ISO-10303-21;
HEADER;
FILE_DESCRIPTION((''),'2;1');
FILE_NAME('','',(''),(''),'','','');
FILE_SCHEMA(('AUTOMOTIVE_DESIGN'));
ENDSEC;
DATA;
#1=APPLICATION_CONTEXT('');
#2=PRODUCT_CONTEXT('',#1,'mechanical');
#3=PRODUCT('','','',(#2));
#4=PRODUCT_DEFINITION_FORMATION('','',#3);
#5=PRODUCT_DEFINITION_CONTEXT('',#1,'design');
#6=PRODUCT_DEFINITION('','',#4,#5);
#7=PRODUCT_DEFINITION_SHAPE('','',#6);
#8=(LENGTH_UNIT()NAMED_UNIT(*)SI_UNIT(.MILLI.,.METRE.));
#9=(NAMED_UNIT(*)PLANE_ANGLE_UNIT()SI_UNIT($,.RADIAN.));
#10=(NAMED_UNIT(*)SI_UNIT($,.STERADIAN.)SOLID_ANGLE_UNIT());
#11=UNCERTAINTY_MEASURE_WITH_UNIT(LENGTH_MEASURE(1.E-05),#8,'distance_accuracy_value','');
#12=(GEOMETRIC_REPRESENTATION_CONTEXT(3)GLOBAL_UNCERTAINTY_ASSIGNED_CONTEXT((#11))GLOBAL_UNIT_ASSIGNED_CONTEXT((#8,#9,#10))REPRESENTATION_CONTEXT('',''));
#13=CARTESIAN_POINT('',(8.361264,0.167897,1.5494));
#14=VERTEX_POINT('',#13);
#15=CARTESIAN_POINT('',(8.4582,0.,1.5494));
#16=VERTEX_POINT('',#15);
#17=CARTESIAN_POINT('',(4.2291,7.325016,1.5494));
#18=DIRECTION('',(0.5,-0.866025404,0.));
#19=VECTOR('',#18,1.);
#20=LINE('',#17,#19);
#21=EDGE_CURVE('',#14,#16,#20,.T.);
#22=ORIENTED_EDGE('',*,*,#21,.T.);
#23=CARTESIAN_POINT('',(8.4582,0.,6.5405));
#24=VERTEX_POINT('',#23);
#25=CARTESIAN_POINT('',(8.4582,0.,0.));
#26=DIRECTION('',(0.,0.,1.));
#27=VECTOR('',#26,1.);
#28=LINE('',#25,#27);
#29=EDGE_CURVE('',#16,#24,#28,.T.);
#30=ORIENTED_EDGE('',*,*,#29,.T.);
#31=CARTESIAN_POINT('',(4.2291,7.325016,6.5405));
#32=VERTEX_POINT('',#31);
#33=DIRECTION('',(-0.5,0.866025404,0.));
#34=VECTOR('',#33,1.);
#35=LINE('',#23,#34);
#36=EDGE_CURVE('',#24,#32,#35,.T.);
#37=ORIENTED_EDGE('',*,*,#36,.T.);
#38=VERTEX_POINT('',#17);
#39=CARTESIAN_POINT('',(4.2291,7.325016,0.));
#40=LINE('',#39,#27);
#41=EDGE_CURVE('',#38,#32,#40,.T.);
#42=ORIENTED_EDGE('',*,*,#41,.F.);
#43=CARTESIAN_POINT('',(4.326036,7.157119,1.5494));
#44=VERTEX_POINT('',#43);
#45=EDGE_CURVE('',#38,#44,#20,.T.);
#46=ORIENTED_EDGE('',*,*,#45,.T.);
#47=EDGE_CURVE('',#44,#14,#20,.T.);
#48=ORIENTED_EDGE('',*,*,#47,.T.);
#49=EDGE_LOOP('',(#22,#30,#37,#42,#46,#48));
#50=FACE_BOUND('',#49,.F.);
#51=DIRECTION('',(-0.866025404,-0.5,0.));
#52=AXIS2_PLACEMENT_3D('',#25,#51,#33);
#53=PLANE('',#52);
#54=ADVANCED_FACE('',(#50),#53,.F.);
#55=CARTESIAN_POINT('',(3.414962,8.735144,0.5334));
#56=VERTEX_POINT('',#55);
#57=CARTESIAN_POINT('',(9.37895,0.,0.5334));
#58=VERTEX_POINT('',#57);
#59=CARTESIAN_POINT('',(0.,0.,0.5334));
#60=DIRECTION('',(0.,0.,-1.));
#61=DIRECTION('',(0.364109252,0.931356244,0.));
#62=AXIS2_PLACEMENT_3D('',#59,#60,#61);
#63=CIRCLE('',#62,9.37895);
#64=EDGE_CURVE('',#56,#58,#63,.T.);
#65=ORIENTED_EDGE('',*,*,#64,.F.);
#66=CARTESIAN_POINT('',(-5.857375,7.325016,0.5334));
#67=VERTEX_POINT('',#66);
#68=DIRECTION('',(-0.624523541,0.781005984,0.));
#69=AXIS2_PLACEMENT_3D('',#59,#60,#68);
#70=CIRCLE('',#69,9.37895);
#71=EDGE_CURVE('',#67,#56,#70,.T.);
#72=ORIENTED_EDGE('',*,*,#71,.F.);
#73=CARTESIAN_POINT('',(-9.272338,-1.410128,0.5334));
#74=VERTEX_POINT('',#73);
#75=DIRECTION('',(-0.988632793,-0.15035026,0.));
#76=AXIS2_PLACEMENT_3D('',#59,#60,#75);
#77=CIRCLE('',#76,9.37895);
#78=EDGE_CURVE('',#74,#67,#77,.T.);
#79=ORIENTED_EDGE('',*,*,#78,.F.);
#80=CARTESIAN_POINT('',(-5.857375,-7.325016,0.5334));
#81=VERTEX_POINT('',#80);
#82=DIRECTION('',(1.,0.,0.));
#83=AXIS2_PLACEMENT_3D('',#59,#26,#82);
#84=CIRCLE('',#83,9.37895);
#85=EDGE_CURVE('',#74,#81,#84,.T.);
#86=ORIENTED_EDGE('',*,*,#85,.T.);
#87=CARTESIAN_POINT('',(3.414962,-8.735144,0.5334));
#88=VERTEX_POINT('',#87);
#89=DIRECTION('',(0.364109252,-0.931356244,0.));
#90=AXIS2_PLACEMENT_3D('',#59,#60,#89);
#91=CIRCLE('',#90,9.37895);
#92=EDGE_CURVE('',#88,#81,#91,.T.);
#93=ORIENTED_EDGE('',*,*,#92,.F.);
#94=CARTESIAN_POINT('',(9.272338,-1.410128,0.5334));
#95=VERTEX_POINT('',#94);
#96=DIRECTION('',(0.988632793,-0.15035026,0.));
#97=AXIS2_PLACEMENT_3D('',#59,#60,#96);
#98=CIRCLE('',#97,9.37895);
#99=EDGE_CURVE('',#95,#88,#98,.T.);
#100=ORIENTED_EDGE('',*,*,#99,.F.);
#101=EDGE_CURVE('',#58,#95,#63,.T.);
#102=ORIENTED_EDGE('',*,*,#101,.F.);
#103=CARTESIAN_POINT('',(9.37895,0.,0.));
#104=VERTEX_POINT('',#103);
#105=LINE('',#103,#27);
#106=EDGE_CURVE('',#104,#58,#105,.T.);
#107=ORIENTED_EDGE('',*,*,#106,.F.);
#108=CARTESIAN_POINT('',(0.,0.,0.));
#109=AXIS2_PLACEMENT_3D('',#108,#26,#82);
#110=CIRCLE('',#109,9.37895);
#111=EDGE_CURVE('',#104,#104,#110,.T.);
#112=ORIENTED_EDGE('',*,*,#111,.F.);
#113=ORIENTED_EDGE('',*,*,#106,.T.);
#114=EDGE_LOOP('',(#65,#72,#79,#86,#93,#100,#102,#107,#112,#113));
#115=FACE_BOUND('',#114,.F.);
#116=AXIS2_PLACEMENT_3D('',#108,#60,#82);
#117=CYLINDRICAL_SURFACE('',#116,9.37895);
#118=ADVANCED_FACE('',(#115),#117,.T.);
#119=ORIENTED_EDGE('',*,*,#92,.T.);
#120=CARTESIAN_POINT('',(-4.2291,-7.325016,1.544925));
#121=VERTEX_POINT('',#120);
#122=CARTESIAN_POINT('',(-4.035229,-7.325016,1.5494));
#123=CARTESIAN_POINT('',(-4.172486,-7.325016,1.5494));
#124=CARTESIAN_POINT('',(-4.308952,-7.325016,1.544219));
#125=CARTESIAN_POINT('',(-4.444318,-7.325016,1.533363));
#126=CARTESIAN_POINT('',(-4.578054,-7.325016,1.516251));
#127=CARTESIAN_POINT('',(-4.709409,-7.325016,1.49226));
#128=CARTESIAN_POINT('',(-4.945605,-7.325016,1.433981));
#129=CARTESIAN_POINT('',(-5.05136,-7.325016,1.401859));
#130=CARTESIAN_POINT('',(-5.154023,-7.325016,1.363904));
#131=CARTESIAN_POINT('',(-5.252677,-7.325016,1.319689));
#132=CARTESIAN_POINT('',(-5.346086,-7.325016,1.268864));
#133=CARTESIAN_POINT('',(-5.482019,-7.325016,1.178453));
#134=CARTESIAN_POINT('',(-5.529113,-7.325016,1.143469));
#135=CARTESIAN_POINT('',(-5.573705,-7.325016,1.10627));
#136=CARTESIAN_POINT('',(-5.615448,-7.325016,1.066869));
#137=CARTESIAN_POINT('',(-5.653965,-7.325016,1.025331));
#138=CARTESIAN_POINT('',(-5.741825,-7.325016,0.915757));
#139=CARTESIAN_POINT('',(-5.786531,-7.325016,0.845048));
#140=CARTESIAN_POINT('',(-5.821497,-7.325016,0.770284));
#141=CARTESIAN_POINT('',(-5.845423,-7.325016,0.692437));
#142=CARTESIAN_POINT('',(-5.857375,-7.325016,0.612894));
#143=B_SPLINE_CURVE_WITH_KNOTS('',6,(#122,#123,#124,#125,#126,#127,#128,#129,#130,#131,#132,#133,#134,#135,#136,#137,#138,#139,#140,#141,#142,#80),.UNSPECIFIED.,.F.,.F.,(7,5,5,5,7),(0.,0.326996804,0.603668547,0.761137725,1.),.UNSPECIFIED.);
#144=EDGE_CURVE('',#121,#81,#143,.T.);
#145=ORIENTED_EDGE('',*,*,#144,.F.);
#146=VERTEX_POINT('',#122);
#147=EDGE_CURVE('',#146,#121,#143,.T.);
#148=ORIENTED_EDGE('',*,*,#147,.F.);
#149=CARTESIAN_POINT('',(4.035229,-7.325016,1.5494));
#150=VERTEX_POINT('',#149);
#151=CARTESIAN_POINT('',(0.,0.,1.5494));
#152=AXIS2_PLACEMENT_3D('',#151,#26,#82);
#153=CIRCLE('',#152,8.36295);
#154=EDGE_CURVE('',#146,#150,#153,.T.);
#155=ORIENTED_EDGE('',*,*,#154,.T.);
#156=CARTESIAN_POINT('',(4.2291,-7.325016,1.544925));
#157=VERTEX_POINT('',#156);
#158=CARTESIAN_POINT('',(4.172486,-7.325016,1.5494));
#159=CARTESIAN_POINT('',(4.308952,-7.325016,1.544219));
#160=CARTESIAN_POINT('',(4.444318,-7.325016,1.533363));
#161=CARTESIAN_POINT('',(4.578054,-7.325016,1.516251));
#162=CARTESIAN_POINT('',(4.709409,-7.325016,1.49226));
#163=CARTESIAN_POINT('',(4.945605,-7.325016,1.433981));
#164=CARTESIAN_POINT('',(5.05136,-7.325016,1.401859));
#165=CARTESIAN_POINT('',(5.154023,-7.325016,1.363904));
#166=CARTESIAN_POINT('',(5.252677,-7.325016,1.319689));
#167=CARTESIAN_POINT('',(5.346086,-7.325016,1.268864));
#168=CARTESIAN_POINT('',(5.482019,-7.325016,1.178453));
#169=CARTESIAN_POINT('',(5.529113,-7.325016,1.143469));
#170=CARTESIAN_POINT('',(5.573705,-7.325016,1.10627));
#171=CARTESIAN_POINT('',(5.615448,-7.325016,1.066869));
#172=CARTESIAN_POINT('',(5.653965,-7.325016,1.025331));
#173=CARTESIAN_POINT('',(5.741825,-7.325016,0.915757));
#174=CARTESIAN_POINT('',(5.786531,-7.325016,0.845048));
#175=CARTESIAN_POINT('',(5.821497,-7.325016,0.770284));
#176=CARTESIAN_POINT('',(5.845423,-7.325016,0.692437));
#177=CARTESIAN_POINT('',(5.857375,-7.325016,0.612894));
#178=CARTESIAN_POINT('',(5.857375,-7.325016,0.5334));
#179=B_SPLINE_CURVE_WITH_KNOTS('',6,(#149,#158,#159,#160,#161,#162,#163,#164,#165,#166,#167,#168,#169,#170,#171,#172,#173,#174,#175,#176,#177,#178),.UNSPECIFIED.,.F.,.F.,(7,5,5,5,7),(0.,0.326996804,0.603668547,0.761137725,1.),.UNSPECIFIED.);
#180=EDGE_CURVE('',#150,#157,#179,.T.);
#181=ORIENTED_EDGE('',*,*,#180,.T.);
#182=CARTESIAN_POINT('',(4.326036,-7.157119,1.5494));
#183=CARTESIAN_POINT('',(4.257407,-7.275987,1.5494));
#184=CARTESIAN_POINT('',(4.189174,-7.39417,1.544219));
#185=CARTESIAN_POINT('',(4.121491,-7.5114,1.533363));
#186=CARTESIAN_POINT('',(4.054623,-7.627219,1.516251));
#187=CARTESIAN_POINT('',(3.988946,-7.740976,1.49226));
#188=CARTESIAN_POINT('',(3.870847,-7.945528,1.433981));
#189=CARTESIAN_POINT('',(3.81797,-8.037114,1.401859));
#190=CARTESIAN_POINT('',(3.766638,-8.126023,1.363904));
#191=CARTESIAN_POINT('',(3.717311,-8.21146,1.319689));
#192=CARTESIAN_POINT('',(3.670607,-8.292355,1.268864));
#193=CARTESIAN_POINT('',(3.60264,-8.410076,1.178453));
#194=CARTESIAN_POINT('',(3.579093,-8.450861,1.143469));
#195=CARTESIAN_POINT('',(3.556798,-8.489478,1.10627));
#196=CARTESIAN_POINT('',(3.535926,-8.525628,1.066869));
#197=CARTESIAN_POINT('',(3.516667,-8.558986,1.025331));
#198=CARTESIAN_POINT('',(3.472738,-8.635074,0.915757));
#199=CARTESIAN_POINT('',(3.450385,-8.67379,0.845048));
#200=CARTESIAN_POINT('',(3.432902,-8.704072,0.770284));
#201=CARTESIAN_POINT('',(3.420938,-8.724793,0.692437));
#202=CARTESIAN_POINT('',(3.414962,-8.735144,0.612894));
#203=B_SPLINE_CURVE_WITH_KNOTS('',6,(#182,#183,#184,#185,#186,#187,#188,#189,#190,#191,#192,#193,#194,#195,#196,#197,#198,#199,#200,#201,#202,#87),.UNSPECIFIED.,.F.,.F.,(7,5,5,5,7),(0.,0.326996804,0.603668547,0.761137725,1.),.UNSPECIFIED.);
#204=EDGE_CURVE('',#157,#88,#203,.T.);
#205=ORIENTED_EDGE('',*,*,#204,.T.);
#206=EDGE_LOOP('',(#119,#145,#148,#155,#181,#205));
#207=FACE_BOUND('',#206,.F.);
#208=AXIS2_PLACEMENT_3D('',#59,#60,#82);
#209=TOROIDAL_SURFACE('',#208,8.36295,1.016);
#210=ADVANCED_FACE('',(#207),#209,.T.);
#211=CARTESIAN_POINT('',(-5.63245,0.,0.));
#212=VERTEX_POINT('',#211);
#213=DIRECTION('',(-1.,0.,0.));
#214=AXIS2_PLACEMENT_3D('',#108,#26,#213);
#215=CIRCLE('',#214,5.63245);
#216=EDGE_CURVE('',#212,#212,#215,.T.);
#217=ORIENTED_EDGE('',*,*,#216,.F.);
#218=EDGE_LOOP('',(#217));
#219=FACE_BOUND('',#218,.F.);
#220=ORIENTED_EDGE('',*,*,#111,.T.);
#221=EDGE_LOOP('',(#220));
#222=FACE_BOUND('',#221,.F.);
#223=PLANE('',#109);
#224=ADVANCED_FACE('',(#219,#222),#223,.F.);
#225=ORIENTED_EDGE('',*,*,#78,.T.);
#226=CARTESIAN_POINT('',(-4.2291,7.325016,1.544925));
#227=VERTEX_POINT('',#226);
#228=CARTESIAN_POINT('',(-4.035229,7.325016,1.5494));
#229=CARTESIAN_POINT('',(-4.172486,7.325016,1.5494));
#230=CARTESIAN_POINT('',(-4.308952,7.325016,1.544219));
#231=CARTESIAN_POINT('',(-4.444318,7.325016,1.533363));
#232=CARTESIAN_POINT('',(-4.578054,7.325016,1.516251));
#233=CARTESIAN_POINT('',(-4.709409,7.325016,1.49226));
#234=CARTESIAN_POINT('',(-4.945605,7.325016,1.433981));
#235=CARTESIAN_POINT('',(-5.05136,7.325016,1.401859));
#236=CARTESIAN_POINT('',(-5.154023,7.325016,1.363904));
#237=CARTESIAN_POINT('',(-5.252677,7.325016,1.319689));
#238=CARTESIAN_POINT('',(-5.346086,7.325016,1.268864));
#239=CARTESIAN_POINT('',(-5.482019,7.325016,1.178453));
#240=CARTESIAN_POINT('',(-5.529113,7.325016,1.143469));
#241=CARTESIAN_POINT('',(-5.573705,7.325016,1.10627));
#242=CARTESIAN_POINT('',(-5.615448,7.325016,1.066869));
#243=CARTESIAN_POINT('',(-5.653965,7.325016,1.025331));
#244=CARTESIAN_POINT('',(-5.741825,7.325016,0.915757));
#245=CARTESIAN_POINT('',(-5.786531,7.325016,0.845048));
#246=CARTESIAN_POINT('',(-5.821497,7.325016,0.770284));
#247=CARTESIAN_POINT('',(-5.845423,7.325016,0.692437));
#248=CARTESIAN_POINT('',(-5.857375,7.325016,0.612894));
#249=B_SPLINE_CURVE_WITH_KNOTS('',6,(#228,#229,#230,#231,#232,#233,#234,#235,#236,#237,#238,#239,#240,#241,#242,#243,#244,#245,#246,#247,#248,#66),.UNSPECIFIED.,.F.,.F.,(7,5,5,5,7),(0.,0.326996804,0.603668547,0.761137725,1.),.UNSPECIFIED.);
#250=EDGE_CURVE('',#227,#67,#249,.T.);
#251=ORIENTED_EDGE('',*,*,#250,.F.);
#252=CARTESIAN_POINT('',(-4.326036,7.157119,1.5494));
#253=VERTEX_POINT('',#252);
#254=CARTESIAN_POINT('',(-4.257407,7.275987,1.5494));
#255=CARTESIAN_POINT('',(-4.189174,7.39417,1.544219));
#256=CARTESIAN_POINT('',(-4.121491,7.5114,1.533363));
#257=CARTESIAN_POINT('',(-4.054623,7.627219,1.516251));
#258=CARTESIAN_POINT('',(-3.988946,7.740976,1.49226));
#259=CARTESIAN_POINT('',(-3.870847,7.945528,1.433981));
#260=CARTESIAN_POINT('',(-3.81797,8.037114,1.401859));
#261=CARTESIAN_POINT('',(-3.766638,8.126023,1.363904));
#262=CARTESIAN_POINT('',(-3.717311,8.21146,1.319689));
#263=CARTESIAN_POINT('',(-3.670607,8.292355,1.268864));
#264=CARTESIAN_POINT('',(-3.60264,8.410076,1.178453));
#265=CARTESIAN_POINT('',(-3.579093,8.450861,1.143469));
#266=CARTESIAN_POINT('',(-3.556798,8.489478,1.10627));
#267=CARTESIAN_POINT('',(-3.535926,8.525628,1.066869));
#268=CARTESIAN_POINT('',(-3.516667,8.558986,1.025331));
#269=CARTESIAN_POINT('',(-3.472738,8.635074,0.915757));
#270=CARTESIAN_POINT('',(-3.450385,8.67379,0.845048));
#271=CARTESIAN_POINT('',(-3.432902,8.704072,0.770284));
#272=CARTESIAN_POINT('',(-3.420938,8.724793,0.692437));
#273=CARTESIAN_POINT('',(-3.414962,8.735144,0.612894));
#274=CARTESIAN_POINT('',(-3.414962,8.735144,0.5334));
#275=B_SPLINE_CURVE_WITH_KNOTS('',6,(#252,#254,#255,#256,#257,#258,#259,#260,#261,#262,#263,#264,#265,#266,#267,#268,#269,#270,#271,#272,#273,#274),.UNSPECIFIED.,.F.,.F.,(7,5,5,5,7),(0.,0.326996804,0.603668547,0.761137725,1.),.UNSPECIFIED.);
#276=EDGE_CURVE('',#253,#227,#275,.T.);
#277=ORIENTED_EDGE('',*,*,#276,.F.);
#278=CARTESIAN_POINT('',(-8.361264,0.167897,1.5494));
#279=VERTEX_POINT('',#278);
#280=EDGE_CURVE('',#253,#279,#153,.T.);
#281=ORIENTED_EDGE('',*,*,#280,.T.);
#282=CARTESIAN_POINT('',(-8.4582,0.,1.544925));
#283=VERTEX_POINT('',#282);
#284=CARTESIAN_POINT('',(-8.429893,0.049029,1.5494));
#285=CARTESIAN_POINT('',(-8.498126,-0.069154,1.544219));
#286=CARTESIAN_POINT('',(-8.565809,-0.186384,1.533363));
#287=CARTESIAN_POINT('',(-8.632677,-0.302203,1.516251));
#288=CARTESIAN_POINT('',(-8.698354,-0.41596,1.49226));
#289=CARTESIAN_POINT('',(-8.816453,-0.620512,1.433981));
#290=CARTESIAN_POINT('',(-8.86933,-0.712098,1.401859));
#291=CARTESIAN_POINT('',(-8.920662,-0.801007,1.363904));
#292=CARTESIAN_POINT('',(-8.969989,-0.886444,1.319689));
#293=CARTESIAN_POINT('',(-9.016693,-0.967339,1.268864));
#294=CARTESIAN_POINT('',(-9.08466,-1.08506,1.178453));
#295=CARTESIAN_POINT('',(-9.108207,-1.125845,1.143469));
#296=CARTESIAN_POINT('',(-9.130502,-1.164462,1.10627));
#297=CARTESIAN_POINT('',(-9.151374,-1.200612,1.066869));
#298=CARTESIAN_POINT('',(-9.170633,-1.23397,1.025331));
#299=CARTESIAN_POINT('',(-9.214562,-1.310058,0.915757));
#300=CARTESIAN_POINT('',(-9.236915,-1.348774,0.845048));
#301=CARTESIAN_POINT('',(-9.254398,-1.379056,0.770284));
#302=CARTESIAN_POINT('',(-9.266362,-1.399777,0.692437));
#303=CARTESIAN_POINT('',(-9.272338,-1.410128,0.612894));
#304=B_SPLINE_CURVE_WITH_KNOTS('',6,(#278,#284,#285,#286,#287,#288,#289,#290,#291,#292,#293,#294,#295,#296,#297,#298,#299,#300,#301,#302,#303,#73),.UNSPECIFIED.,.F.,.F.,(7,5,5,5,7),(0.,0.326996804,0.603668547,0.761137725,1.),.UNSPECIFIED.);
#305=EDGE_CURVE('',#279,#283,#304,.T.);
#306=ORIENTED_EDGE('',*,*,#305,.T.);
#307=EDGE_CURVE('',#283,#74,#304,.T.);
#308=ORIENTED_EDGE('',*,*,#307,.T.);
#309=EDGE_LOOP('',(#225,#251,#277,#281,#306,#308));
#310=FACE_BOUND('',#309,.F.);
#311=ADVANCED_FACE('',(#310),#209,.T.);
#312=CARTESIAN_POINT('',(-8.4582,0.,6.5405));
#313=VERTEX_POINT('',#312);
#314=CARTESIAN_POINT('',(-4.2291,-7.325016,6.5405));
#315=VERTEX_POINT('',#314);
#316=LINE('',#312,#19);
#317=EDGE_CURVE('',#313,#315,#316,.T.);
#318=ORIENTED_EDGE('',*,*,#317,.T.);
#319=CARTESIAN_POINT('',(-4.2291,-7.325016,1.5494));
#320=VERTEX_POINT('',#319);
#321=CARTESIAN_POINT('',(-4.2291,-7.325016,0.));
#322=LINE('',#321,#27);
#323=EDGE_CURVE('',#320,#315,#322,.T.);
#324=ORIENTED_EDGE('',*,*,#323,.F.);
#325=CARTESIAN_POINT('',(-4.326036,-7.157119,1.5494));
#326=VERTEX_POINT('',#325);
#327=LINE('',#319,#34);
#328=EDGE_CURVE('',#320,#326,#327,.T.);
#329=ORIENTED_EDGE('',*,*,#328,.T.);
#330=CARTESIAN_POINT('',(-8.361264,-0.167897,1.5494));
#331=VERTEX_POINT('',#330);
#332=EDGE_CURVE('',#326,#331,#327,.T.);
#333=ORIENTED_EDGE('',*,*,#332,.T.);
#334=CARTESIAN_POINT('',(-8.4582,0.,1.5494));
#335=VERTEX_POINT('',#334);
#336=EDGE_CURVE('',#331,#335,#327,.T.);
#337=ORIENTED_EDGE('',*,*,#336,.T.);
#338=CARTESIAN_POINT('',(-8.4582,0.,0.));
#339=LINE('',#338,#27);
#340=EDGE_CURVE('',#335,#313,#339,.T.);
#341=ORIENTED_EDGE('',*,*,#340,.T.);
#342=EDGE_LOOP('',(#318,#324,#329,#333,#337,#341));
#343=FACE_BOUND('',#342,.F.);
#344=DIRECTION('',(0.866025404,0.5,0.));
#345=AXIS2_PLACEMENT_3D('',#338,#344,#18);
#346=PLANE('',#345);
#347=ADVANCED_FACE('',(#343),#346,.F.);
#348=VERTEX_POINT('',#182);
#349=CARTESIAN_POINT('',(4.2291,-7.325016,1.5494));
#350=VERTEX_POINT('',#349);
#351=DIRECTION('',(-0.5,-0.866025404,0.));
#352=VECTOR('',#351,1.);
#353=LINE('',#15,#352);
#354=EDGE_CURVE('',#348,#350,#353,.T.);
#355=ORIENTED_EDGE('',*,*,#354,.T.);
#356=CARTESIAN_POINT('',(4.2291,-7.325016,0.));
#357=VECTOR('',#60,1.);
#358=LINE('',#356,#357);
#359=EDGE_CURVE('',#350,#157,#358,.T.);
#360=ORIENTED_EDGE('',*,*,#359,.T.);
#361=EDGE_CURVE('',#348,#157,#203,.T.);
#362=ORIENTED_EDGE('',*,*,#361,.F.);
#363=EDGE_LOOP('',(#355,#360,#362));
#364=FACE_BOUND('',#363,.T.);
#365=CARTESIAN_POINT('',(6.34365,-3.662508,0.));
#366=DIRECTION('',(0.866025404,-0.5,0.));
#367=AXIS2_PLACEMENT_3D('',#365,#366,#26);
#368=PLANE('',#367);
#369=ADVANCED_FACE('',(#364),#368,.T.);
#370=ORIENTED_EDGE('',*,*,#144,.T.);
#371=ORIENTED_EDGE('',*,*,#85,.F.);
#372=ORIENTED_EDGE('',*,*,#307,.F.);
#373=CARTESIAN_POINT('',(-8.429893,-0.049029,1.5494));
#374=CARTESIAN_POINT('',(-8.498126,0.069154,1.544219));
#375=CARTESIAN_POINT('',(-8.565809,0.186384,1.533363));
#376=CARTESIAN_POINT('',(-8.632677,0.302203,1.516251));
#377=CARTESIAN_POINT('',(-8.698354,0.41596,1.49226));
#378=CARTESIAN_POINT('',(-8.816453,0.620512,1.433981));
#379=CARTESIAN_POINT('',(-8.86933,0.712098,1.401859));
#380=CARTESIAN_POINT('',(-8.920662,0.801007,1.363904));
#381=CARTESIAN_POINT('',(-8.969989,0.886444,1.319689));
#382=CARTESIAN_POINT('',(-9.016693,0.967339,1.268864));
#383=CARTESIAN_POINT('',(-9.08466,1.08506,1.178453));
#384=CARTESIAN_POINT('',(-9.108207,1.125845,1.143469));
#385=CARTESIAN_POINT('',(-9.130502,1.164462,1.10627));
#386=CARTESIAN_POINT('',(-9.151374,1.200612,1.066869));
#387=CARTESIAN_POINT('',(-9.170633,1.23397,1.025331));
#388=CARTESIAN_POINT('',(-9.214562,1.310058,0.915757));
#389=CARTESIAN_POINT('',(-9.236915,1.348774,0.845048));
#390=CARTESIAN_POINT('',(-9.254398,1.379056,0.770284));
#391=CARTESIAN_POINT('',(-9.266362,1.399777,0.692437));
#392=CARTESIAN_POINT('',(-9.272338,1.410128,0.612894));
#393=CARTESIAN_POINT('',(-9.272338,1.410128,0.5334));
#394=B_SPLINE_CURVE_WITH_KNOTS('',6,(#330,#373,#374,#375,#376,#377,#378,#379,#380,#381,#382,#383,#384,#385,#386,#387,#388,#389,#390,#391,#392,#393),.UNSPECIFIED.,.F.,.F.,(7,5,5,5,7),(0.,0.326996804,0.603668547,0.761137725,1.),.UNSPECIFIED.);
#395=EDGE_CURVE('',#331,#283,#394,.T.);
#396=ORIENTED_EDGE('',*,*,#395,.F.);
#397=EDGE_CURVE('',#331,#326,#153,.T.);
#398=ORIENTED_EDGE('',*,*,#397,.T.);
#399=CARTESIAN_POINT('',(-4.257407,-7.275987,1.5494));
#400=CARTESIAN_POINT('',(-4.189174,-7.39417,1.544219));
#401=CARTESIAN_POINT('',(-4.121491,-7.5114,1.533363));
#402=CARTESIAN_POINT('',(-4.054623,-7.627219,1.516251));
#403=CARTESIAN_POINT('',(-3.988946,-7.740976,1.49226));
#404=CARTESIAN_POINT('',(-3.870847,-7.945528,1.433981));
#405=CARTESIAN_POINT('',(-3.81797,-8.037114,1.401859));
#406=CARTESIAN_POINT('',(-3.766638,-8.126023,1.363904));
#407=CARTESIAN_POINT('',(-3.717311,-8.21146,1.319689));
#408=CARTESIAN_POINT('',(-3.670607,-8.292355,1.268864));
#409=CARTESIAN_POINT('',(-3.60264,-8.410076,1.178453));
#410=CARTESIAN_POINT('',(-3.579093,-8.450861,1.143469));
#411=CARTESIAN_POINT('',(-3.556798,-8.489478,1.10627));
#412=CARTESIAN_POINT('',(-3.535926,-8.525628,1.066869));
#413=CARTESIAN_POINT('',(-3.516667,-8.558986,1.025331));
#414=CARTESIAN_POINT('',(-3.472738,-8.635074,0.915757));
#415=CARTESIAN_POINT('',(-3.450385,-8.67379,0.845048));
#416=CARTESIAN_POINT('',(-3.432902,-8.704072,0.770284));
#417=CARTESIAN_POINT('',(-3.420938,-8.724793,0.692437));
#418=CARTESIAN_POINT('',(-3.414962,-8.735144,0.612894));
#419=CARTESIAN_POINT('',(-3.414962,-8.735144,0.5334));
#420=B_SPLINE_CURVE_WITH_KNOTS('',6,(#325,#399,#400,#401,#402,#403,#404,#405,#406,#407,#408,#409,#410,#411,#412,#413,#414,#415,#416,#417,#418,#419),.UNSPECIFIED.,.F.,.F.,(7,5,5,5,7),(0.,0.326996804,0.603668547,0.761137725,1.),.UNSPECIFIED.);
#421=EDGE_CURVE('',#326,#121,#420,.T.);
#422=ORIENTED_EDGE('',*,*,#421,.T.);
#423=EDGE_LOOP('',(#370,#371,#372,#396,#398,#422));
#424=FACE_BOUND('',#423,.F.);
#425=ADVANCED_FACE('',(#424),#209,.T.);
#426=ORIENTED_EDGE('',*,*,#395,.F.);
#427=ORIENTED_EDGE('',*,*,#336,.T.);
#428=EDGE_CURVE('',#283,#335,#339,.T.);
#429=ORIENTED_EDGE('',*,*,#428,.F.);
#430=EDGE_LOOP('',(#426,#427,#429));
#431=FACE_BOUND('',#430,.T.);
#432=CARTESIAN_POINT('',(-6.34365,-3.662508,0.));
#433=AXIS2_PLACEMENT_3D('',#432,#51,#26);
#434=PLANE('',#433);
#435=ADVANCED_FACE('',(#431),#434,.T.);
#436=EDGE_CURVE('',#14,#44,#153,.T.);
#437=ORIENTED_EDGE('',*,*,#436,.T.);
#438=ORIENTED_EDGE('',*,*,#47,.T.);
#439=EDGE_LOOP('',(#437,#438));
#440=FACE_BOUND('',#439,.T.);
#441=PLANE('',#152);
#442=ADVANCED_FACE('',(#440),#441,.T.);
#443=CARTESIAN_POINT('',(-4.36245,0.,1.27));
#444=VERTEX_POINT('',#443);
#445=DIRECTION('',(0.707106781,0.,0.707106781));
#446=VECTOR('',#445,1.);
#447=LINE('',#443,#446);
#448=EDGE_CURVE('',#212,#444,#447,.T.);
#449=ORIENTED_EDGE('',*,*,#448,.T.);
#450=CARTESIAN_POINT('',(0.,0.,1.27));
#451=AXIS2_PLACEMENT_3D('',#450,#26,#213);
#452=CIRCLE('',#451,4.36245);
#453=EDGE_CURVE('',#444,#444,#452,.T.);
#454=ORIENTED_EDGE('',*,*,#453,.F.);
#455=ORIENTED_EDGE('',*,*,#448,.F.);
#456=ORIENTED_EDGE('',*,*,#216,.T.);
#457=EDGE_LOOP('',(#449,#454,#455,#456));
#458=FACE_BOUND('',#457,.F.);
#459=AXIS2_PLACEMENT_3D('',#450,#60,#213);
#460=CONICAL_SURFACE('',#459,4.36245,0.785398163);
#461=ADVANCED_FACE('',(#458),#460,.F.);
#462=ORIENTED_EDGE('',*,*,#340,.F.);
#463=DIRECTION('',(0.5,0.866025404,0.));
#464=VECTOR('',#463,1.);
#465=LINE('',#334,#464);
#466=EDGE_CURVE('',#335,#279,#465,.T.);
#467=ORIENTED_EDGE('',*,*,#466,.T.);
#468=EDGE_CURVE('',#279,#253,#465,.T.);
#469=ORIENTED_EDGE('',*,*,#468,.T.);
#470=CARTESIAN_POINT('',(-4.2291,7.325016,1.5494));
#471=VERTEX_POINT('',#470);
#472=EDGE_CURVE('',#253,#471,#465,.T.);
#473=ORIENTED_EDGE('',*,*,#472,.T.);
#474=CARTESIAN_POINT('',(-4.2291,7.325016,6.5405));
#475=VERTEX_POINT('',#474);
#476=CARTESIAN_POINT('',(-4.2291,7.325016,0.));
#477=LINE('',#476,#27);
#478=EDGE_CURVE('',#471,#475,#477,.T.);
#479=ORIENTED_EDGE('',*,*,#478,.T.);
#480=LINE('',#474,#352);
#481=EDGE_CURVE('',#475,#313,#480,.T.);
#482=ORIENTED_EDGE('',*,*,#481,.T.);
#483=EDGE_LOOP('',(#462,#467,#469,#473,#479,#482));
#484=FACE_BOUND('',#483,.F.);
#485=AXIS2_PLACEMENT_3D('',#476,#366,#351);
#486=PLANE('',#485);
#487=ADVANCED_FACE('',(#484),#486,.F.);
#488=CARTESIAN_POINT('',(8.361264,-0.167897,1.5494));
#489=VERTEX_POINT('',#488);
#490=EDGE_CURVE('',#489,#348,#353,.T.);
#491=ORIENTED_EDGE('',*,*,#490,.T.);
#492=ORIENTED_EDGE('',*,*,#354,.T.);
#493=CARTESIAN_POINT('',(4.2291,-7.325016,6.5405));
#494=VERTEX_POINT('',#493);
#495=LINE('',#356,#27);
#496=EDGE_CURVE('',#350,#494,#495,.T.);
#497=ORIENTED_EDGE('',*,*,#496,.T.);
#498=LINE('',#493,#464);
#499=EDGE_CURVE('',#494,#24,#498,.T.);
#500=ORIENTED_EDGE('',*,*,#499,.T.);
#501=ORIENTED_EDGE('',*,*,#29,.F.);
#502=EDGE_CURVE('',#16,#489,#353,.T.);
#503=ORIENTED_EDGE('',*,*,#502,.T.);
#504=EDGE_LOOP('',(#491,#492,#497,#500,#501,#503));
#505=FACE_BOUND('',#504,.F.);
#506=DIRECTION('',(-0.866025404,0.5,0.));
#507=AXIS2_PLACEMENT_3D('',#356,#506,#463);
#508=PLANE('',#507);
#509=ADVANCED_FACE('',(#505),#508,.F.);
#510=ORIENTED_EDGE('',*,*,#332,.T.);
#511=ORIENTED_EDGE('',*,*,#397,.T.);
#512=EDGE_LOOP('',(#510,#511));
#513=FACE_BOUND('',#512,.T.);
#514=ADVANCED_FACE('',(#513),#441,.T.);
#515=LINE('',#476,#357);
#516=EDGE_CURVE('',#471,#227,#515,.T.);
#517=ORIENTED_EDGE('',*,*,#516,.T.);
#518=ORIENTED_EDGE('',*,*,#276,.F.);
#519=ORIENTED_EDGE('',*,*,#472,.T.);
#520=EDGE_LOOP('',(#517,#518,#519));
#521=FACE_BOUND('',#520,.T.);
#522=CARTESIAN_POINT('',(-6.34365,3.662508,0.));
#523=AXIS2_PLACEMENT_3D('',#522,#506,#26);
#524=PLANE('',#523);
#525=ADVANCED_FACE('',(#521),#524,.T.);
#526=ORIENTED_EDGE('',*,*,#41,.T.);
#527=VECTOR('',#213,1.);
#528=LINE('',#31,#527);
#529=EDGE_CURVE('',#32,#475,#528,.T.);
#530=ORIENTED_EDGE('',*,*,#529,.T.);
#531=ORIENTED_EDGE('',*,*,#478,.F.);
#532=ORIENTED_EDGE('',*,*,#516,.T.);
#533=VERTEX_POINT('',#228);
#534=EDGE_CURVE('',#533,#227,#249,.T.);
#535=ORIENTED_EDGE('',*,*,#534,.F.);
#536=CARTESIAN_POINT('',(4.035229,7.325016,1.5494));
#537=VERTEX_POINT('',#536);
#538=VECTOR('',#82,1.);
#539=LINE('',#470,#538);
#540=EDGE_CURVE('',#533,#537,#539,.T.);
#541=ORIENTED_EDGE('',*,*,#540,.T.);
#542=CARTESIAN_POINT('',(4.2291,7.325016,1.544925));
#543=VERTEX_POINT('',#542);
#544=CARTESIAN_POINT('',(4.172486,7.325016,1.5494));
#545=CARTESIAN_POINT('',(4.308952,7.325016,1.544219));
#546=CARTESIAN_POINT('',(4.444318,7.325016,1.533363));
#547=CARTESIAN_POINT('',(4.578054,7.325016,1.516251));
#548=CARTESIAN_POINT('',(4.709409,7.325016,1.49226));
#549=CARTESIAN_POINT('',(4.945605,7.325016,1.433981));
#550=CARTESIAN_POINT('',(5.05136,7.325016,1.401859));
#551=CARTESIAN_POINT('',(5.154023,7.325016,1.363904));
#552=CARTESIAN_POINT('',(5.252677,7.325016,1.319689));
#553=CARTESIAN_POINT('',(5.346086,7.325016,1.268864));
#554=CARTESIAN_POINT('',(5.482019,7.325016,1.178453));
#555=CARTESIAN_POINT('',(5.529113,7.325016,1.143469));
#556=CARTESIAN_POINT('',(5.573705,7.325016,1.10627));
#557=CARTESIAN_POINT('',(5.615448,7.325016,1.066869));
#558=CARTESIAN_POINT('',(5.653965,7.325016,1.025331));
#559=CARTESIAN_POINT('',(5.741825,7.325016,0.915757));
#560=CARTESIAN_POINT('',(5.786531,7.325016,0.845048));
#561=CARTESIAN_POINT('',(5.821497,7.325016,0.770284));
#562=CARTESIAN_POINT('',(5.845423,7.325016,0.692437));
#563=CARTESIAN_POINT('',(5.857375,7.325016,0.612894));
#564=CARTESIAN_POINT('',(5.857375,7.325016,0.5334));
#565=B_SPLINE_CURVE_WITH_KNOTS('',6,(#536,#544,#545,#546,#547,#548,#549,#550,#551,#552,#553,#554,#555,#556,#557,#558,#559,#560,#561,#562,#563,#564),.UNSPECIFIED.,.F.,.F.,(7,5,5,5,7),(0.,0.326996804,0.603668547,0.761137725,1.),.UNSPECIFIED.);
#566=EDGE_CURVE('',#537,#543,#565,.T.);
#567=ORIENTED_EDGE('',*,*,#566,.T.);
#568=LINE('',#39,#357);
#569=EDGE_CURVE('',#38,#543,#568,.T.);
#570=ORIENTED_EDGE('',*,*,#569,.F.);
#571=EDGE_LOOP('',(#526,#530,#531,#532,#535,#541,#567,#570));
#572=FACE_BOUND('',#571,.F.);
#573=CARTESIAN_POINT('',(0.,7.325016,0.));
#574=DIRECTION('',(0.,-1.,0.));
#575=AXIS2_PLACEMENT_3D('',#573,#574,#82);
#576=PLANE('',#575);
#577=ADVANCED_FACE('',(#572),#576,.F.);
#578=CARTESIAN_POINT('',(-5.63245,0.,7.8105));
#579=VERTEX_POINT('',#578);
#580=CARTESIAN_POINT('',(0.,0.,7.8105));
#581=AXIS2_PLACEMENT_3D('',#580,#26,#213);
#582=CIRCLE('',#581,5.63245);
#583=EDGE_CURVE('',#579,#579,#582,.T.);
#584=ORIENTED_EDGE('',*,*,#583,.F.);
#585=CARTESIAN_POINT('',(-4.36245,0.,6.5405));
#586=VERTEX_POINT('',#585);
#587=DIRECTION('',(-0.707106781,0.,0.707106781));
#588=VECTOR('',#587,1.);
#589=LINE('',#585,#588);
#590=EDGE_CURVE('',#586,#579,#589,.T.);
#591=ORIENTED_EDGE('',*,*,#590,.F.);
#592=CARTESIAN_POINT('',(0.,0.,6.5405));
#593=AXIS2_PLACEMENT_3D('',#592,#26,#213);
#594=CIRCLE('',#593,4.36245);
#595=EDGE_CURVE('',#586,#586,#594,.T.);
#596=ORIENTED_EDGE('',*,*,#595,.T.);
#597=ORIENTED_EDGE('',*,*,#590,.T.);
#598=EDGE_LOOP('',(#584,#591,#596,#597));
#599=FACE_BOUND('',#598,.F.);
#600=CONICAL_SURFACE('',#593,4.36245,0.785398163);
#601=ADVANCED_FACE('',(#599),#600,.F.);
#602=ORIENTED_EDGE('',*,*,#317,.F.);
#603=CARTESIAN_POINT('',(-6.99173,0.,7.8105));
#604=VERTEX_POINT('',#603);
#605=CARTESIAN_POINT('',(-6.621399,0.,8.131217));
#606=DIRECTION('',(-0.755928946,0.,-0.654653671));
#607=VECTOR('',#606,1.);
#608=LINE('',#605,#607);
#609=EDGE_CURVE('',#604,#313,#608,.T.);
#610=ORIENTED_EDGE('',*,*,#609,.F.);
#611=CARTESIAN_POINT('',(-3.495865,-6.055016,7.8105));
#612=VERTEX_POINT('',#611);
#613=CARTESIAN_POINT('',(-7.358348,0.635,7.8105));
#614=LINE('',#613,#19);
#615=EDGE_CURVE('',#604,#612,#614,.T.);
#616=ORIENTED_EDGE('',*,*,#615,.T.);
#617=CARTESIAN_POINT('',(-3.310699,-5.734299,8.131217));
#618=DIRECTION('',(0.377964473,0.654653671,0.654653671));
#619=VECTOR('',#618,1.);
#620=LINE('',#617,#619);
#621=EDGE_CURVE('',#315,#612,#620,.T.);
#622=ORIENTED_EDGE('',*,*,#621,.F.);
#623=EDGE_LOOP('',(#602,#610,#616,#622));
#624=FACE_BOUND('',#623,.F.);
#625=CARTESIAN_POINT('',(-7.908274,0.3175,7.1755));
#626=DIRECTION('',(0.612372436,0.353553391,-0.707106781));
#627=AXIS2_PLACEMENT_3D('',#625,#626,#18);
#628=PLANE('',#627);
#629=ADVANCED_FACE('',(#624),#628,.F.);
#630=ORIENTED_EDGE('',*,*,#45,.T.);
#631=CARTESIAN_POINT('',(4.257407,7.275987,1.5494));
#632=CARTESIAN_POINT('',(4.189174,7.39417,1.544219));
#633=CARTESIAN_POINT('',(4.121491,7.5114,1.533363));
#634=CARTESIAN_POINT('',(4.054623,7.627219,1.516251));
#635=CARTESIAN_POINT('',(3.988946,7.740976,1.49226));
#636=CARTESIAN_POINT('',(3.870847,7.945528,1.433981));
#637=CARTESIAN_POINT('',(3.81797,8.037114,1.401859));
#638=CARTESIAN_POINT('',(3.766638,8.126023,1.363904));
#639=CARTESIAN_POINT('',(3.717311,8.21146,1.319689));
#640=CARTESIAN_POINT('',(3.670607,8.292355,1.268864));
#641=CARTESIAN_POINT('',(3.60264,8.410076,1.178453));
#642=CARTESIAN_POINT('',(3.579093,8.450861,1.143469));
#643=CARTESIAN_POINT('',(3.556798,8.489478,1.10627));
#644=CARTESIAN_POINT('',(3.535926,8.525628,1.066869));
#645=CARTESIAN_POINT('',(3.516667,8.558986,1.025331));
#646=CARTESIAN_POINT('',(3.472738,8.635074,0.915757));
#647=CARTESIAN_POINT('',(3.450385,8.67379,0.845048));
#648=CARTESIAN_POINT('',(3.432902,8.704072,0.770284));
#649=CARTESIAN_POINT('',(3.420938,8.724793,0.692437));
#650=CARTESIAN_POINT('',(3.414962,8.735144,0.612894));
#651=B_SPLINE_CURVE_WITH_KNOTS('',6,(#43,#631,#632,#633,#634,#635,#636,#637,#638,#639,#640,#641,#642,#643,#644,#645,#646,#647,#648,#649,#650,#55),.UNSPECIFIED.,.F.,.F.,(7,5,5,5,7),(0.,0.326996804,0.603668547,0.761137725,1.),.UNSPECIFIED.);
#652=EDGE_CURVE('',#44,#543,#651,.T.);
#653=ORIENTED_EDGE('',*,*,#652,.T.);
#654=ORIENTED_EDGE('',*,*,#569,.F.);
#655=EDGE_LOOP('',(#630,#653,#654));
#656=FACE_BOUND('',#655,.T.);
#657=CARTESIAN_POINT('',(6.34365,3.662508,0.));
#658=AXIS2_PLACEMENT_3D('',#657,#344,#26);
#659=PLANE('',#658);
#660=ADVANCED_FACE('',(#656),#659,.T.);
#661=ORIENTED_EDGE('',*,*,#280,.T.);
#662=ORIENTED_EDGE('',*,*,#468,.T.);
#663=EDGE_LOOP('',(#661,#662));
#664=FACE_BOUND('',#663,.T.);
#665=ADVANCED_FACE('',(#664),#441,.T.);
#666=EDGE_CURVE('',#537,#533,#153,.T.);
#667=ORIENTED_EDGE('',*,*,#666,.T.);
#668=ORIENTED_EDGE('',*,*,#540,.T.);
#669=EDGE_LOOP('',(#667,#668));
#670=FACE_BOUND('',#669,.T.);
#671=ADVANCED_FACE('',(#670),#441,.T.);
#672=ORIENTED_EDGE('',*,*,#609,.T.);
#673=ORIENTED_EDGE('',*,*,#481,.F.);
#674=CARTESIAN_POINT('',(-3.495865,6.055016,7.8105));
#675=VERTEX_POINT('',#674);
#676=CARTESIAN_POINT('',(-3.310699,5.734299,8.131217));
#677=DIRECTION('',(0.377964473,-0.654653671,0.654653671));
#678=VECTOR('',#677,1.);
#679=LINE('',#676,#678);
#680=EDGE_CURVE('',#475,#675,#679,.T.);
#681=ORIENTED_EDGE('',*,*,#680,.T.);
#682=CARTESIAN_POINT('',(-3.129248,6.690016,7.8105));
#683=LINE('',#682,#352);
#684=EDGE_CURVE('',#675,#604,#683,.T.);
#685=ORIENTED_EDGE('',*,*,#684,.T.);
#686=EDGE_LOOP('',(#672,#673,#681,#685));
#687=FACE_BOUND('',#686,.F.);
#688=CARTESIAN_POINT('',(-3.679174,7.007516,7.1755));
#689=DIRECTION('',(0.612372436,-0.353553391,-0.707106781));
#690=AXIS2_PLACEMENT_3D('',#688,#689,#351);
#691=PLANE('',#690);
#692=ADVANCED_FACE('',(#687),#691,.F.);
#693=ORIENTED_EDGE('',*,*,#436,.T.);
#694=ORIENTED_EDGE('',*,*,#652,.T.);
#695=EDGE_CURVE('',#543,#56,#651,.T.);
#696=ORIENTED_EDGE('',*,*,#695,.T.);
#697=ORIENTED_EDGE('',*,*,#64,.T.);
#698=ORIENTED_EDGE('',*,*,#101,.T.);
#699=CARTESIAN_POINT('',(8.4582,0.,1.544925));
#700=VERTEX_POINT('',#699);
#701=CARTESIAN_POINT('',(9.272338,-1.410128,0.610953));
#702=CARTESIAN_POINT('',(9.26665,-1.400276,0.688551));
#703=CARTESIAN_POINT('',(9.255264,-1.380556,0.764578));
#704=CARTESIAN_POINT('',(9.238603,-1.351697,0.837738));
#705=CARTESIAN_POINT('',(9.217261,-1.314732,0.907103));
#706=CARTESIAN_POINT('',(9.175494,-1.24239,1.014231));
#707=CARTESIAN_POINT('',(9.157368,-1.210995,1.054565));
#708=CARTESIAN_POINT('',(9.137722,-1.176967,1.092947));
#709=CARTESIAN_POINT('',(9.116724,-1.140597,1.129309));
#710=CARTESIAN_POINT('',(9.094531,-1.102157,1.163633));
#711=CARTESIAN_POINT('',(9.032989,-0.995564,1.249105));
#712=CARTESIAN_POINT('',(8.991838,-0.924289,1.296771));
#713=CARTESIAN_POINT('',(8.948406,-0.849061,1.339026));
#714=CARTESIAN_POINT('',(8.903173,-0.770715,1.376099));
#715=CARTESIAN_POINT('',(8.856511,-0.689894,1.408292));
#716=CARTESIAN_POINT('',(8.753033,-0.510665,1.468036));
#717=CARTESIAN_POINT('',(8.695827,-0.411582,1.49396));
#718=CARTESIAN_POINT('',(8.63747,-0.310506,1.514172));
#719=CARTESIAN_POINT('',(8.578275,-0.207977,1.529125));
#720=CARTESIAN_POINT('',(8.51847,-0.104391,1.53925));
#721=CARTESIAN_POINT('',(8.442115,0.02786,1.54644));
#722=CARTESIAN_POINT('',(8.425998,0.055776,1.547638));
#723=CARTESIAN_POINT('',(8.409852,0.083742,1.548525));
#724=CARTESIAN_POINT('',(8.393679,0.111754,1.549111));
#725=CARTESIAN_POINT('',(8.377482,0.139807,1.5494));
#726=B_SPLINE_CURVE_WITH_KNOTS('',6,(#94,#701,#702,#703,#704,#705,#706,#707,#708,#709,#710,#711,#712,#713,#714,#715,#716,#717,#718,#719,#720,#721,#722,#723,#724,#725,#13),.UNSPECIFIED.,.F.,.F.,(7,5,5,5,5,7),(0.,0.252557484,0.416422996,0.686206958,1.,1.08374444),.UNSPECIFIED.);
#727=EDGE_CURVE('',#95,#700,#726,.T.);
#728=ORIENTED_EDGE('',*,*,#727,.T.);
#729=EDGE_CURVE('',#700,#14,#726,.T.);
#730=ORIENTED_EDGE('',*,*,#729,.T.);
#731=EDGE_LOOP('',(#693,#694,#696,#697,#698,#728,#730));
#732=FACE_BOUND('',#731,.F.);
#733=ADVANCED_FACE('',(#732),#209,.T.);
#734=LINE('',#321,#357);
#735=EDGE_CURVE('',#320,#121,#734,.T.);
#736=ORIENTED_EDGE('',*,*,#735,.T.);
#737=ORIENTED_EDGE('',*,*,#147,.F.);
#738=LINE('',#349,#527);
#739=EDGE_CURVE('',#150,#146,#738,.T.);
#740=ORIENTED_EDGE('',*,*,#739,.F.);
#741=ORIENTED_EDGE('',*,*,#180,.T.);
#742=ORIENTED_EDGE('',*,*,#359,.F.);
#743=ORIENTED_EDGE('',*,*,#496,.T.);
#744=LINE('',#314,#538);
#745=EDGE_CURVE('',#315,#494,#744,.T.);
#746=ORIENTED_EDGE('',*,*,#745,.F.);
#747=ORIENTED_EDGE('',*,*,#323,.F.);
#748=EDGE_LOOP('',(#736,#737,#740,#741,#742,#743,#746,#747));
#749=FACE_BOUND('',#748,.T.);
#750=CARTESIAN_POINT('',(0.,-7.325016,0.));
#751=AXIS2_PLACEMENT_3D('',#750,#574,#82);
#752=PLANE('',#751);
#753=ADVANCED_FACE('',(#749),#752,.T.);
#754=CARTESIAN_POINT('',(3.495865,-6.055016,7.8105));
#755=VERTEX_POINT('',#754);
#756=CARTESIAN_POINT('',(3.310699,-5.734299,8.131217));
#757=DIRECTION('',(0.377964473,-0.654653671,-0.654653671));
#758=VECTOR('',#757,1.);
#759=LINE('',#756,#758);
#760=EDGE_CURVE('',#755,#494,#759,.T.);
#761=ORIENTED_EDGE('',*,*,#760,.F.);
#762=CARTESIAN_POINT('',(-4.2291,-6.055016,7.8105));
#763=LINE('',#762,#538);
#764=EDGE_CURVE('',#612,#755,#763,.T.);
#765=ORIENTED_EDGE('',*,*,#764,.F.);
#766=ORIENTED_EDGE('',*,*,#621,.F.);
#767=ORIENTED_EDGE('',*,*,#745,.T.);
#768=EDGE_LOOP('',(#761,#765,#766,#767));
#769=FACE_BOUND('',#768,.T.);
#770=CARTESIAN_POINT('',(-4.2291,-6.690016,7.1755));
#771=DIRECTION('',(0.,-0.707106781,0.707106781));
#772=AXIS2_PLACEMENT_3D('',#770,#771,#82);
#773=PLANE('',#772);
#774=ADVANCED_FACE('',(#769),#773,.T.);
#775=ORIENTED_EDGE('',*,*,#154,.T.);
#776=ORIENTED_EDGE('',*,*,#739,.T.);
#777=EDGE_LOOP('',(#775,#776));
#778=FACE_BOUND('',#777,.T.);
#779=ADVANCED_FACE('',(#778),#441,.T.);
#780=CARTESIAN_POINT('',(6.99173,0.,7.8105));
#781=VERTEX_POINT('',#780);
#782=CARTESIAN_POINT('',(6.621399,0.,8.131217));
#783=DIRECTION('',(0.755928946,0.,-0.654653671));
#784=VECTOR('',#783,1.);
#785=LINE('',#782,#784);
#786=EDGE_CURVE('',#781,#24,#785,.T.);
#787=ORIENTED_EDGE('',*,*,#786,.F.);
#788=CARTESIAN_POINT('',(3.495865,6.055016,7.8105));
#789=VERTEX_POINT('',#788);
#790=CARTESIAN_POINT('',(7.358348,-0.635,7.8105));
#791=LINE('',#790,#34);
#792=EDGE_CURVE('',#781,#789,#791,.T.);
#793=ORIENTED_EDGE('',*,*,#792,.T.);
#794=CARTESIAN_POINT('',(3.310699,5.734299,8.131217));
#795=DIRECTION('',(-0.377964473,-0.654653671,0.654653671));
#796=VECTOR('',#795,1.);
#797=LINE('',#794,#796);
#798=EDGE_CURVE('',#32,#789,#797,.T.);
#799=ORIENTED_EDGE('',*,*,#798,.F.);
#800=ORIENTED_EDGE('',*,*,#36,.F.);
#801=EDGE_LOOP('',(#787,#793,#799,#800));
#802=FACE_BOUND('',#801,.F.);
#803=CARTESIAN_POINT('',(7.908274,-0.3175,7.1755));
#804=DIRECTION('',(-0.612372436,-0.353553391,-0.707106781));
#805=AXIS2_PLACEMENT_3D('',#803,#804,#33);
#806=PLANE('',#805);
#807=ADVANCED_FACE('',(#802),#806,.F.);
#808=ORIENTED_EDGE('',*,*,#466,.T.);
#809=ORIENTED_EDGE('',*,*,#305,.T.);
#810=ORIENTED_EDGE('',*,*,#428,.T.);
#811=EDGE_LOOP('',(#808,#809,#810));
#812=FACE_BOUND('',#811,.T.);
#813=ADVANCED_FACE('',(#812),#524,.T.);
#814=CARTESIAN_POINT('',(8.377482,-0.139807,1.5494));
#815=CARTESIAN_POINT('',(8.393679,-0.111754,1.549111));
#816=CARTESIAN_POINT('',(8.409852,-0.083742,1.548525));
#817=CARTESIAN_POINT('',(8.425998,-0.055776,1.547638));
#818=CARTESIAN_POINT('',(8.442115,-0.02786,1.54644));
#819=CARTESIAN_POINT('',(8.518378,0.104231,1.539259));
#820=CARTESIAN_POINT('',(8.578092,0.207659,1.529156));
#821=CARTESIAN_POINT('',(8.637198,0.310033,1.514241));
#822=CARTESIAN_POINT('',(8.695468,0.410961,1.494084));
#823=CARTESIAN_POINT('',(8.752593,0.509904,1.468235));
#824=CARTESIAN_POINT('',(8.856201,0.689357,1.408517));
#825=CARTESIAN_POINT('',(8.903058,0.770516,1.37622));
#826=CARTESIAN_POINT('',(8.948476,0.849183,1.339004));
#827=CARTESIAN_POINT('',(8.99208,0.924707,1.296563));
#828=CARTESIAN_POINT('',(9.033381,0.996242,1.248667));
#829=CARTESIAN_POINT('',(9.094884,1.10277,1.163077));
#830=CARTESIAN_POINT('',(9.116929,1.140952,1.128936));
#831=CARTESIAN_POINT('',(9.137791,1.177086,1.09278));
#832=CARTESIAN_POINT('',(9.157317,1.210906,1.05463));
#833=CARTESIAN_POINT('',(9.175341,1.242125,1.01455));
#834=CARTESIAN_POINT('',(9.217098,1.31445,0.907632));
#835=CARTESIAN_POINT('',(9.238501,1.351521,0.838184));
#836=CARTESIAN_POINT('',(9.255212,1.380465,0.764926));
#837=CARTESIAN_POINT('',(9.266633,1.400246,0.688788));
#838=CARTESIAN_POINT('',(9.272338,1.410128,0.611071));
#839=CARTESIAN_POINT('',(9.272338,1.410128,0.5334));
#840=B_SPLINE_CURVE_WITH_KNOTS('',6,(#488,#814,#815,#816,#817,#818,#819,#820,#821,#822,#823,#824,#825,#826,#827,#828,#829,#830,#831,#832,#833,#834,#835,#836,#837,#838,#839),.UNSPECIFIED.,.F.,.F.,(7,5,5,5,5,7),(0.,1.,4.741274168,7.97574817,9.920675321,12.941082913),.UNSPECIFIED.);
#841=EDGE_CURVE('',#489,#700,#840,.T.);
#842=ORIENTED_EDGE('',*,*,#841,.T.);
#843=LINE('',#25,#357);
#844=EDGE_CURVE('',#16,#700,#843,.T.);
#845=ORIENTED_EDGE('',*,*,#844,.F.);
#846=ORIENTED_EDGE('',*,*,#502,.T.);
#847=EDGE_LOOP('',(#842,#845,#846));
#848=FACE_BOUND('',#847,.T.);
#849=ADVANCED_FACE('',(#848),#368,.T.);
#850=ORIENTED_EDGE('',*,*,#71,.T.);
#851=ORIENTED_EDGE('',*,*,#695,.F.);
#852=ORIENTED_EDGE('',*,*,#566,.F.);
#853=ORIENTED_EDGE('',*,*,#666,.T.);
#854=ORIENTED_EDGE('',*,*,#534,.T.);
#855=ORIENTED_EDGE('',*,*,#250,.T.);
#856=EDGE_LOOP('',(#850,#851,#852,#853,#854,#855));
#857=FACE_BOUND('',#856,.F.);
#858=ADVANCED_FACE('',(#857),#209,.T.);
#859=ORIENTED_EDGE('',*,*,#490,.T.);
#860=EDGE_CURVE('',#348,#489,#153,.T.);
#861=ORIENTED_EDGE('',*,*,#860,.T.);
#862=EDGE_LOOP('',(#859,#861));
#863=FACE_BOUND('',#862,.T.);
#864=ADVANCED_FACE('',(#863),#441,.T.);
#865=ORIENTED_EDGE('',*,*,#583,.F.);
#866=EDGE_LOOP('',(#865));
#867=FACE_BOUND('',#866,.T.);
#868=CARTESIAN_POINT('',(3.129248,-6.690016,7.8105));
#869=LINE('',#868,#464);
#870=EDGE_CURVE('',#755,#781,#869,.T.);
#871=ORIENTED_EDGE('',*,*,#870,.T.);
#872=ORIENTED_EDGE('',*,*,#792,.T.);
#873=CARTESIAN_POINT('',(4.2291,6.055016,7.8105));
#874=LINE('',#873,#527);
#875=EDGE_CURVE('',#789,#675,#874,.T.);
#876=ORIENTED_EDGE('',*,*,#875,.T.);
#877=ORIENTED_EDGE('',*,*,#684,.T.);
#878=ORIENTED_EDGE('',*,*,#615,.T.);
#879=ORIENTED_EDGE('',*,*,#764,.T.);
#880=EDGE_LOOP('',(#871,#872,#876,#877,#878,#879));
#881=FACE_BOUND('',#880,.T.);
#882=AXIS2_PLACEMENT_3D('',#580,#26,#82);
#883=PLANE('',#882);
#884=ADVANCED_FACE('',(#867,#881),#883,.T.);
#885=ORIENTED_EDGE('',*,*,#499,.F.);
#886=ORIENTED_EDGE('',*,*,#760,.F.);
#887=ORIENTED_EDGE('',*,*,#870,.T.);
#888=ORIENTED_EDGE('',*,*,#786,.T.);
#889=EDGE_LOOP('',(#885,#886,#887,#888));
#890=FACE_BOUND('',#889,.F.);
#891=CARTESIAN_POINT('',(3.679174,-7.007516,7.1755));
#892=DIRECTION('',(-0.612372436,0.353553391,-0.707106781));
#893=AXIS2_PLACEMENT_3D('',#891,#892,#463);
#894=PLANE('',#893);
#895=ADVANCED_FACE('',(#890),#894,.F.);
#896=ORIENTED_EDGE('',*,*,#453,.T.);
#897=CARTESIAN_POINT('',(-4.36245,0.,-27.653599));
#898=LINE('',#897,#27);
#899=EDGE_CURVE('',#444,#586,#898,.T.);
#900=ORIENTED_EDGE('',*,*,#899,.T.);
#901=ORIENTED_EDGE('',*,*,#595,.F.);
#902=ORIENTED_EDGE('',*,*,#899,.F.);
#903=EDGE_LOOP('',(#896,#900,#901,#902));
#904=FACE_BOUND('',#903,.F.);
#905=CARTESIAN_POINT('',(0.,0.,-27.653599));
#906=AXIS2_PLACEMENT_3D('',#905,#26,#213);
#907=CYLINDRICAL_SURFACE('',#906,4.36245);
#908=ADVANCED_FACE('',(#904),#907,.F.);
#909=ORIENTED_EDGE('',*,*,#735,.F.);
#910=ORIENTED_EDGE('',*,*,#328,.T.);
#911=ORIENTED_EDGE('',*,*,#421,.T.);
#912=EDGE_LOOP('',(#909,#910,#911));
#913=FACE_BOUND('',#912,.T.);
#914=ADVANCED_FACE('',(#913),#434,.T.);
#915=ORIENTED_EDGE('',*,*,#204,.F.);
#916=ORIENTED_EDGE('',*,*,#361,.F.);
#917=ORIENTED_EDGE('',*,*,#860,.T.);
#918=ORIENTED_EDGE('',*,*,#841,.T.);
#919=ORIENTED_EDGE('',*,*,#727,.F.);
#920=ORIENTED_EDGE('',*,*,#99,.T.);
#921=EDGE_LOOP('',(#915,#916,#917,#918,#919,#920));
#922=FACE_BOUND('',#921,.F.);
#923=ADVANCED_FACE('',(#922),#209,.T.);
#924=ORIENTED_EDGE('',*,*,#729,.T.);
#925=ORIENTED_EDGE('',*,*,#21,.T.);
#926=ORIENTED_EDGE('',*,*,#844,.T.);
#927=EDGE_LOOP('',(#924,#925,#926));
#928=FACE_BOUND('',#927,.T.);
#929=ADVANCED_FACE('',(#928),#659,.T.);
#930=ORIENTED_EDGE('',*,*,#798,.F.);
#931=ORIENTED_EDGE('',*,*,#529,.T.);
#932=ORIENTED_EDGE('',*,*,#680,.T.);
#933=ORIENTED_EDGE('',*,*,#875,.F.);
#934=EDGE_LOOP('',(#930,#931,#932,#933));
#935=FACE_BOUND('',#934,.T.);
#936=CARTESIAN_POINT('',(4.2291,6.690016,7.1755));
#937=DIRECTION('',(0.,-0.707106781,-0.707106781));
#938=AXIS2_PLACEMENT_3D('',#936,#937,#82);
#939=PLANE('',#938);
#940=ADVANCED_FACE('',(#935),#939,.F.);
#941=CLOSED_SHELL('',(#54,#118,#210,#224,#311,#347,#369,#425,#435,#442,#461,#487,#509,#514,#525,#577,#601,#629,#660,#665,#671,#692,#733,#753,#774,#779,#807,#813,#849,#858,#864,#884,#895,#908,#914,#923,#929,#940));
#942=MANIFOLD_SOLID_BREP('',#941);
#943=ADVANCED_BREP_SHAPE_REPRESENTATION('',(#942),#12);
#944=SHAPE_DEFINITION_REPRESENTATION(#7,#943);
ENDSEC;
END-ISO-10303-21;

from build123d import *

# Parameters (mm, degrees)
F1_DEPTH = 7.8105
F0_R     = 9.37895
F2_DEPTH = 1.5494
F4_D     = 8.7249
F5_SIZE  = 1.27


# Not quite as in the source:
# - a fillet or chamfer that OpenCascade refuses, or shapes differently, is made with other operations: its cross-section is extruded or revolved along the edge and cut away or added


with BuildPart() as f1:
    # F0 (on Top) → F1 (new body)
    with BuildSketch(Plane.XY):
        Polygon((4.2291, 7.3250160703), (-4.2291, 7.3250160703), (-8.4582, 0), (-4.2291, -7.3250160703), (4.2291, -7.3250160703), (8.4582, 0), align=None)
    extrude(amount=F1_DEPTH)

    # F0 (on Top) → F2 (join)
    with BuildSketch(Plane.XY):
        Circle(F0_R)
        Polygon((-8.4582, 0), (-4.2291, 7.3250160703), (4.2291, 7.3250160703), (8.4582, 0), (4.2291, -7.3250160703), (-4.2291, -7.3250160703), align=None, mode=Mode.SUBTRACT)
    extrude(amount=F2_DEPTH)

    # F3: fillet of radius 1.016 on 1 edges, made by hand


with BuildPart() as f3_tool2:
    # F3_s3 → F3_t4 (revolve)
    with BuildSketch(Plane.XZ):
        with BuildLine():
            ThreePointArc((8.36295, 1.5494), (9.0813704897, 1.2518204897), (9.37895, 0.5334))
            Line((9.37895, 0.5334), (9.37895, 1.5494))
            Line((9.37895, 1.5494), (8.36295, 1.5494))
        make_face()
    revolve(axis=Axis((0, 0, 1.5494), (0, 0, 1)))

    split(bisect_by=Plane(origin=(6.34365, 3.6625080351, 0), x_dir=(0, 0, 1), z_dir=(0.8660254038, 0.5, 0)), keep=Keep.TOP)


with BuildPart() as f1_1:
    add(f1.part)

    # F3_t1: cut F3_tool2
    add(f3_tool2.part, mode=Mode.SUBTRACT)


with BuildPart() as f3_tool7:
    # F3_s8 → F3_t9 (revolve)
    with BuildSketch(Plane.XZ):
        with BuildLine():
            ThreePointArc((8.36295, 1.5494), (9.0813704897, 1.2518204897), (9.37895, 0.5334))
            Line((9.37895, 0.5334), (9.37895, 1.5494))
            Line((9.37895, 1.5494), (8.36295, 1.5494))
        make_face()
    revolve(axis=Axis((0, 0, 1.5494), (0, 0, 1)))

    split(bisect_by=Plane(origin=(6.34365, -3.6625080351, 0), x_dir=(0, 0, 1), z_dir=(0.8660254038, -0.5, 0)), keep=Keep.TOP)


with BuildPart() as f1_2:
    add(f1_1.part)

    # F3_t6: cut F3_tool7
    add(f3_tool7.part, mode=Mode.SUBTRACT)


with BuildPart() as f3_tool12:
    # F3_s13 → F3_t14 (revolve)
    with BuildSketch(Plane.XZ):
        with BuildLine():
            ThreePointArc((8.36295, 1.5494), (9.0813704897, 1.2518204897), (9.37895, 0.5334))
            Line((9.37895, 0.5334), (9.37895, 1.5494))
            Line((9.37895, 1.5494), (8.36295, 1.5494))
        make_face()
    revolve(axis=Axis((0, 0, 1.5494), (0, 0, 1)))

    split(bisect_by=Plane.XZ.offset(-7.3250160703), keep=Keep.BOTTOM)


with BuildPart() as f1_3:
    add(f1_2.part)

    # F3_t11: cut F3_tool12
    add(f3_tool12.part, mode=Mode.SUBTRACT)


with BuildPart() as f3_tool17:
    # F3_s18 → F3_t19 (revolve)
    with BuildSketch(Plane.XZ):
        with BuildLine():
            ThreePointArc((8.36295, 1.5494), (9.0813704897, 1.2518204897), (9.37895, 0.5334))
            Line((9.37895, 0.5334), (9.37895, 1.5494))
            Line((9.37895, 1.5494), (8.36295, 1.5494))
        make_face()
    revolve(axis=Axis((0, 0, 1.5494), (0, 0, 1)))

    split(bisect_by=Plane.XZ.offset(7.3250160703), keep=Keep.TOP)


with BuildPart() as f1_4:
    add(f1_3.part)

    # F3_t16: cut F3_tool17
    add(f3_tool17.part, mode=Mode.SUBTRACT)


with BuildPart() as f3_tool22:
    # F3_s23 → F3_t24 (revolve)
    with BuildSketch(Plane.XZ):
        with BuildLine():
            ThreePointArc((8.36295, 1.5494), (9.0813704897, 1.2518204897), (9.37895, 0.5334))
            Line((9.37895, 0.5334), (9.37895, 1.5494))
            Line((9.37895, 1.5494), (8.36295, 1.5494))
        make_face()
    revolve(axis=Axis((0, 0, 1.5494), (0, 0, 1)))

    split(bisect_by=Plane(origin=(-6.34365, 3.6625080351, 0), x_dir=(0, 0, 1), z_dir=(-0.8660254038, 0.5, 0)), keep=Keep.TOP)


with BuildPart() as f1_5:
    add(f1_4.part)

    # F3_t21: cut F3_tool22
    add(f3_tool22.part, mode=Mode.SUBTRACT)


with BuildPart() as f3_tool27:
    # F3_s28 → F3_t29 (revolve)
    with BuildSketch(Plane.XZ):
        with BuildLine():
            ThreePointArc((8.36295, 1.5494), (9.0813704897, 1.2518204897), (9.37895, 0.5334))
            Line((9.37895, 0.5334), (9.37895, 1.5494))
            Line((9.37895, 1.5494), (8.36295, 1.5494))
        make_face()
    revolve(axis=Axis((0, 0, 1.5494), (0, 0, 1)))

    split(bisect_by=Plane(origin=(-6.34365, -3.6625080351, 0), x_dir=(0, 0, 1), z_dir=(-0.8660254038, -0.5, 0)), keep=Keep.TOP)


with BuildPart() as f1_6:
    add(f1_5.part)

    # F3_t26: cut F3_tool27
    add(f3_tool27.part, mode=Mode.SUBTRACT)

    # F4 (through all)
    with Locations(Plane(origin=(0, 0, 0), x_dir=(1, 0, 0), z_dir=(0, 0, -1))):
        with Locations((0, 0)):
            Hole(F4_D / 2)

    # F5
    f5_edges = [f1_6.edges().sort_by_distance(p)[0] for p in [
        (0, 7.325016, 7.8105),
        (6.34365, 3.662508, 7.8105),
        (6.34365, -3.662508, 7.8105),
        (0, -7.325016, 7.8105),
        (-6.34365, -3.662508, 7.8105),
        (-6.34365, 3.662508, 7.8105),
        (-4.36245, 0, 7.8105),
        (-4.36245, 0, 0),
    ]]
    chamfer(f5_edges, length=F5_SIZE)


solid = f1_6.part
